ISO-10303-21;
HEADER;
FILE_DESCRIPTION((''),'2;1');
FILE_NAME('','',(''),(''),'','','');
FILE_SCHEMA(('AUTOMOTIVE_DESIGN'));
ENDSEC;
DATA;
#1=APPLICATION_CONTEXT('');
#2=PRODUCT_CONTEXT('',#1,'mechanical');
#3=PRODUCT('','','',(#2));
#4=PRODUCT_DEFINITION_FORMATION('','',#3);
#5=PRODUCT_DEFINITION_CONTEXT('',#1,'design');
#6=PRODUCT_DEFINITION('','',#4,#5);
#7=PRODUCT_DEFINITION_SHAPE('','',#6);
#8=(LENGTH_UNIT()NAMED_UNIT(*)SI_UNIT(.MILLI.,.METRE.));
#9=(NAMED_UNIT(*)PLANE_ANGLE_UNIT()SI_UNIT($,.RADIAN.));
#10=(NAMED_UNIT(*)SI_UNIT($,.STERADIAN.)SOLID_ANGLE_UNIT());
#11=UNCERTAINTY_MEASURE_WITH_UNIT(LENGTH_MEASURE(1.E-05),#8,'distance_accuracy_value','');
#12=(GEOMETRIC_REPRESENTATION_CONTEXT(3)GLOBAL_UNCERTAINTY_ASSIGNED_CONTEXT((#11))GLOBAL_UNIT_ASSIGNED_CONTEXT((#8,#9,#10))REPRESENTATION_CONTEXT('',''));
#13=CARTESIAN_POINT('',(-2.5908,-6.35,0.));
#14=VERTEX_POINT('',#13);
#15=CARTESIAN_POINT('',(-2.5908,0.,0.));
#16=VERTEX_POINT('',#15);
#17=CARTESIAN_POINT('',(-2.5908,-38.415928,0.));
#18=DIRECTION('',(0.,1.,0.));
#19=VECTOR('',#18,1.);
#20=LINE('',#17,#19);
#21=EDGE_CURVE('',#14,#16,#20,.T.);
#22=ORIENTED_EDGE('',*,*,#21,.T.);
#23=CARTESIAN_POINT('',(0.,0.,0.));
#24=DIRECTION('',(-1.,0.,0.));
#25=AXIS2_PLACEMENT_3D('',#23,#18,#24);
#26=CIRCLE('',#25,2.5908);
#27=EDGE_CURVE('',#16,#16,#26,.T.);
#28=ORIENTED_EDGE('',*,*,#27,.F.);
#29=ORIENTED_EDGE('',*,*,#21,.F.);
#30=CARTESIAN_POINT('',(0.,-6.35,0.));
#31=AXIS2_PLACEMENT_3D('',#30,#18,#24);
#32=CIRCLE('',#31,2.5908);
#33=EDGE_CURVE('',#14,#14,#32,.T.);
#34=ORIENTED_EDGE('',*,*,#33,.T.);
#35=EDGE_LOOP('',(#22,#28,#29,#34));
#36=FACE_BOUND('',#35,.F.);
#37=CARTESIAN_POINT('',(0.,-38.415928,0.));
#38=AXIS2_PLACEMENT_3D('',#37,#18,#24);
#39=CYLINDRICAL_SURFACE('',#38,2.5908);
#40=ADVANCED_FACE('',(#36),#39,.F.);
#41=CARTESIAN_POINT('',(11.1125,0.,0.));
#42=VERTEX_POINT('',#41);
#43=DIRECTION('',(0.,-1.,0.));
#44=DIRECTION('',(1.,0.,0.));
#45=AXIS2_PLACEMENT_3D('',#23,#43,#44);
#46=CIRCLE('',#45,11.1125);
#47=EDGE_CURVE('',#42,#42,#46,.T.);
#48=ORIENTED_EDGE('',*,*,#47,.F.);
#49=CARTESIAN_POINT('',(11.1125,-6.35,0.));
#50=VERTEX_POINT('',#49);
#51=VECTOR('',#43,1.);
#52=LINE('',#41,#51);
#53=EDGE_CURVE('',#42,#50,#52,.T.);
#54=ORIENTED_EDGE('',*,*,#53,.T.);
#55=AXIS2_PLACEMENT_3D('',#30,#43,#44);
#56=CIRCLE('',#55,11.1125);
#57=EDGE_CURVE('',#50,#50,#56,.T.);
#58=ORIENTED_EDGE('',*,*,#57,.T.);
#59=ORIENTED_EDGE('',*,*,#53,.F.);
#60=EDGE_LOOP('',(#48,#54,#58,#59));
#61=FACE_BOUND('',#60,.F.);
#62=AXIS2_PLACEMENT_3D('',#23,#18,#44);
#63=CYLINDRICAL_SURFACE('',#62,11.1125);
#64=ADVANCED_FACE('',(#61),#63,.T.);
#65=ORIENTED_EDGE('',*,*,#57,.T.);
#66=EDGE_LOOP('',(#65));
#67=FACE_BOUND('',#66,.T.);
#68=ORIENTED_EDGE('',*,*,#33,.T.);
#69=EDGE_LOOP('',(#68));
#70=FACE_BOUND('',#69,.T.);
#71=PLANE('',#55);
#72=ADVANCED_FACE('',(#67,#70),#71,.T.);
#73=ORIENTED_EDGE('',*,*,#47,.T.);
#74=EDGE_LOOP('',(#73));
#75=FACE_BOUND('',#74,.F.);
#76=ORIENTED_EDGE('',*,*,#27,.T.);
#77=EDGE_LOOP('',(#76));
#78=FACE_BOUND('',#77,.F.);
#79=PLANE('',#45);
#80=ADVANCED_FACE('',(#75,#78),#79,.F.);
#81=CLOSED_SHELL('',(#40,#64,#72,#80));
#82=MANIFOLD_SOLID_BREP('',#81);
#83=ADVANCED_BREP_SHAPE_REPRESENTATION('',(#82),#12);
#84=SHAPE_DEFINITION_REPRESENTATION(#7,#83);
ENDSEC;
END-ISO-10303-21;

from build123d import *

# Parameters (mm, degrees)
F0_R     = 11.1125
F1_DEPTH = 6.35
F3_D     = 5.1816


# Not quite as in the source:
# - a length typed as a fraction of an inch, garbled in the dataset ("3 / 203.2 mm" for 3/8 in), is restored


with BuildPart() as f1:
    # F0 (on Front) → F1 (new body)
    with BuildSketch(Plane.XZ):
        Circle(F0_R)
    extrude(amount=F1_DEPTH)

    # F3 (through all)
    with Locations(Plane.XZ.offset(6.35)):
        with Locations((0, 0)):
            Hole(F3_D / 2)


solid = f1.part
